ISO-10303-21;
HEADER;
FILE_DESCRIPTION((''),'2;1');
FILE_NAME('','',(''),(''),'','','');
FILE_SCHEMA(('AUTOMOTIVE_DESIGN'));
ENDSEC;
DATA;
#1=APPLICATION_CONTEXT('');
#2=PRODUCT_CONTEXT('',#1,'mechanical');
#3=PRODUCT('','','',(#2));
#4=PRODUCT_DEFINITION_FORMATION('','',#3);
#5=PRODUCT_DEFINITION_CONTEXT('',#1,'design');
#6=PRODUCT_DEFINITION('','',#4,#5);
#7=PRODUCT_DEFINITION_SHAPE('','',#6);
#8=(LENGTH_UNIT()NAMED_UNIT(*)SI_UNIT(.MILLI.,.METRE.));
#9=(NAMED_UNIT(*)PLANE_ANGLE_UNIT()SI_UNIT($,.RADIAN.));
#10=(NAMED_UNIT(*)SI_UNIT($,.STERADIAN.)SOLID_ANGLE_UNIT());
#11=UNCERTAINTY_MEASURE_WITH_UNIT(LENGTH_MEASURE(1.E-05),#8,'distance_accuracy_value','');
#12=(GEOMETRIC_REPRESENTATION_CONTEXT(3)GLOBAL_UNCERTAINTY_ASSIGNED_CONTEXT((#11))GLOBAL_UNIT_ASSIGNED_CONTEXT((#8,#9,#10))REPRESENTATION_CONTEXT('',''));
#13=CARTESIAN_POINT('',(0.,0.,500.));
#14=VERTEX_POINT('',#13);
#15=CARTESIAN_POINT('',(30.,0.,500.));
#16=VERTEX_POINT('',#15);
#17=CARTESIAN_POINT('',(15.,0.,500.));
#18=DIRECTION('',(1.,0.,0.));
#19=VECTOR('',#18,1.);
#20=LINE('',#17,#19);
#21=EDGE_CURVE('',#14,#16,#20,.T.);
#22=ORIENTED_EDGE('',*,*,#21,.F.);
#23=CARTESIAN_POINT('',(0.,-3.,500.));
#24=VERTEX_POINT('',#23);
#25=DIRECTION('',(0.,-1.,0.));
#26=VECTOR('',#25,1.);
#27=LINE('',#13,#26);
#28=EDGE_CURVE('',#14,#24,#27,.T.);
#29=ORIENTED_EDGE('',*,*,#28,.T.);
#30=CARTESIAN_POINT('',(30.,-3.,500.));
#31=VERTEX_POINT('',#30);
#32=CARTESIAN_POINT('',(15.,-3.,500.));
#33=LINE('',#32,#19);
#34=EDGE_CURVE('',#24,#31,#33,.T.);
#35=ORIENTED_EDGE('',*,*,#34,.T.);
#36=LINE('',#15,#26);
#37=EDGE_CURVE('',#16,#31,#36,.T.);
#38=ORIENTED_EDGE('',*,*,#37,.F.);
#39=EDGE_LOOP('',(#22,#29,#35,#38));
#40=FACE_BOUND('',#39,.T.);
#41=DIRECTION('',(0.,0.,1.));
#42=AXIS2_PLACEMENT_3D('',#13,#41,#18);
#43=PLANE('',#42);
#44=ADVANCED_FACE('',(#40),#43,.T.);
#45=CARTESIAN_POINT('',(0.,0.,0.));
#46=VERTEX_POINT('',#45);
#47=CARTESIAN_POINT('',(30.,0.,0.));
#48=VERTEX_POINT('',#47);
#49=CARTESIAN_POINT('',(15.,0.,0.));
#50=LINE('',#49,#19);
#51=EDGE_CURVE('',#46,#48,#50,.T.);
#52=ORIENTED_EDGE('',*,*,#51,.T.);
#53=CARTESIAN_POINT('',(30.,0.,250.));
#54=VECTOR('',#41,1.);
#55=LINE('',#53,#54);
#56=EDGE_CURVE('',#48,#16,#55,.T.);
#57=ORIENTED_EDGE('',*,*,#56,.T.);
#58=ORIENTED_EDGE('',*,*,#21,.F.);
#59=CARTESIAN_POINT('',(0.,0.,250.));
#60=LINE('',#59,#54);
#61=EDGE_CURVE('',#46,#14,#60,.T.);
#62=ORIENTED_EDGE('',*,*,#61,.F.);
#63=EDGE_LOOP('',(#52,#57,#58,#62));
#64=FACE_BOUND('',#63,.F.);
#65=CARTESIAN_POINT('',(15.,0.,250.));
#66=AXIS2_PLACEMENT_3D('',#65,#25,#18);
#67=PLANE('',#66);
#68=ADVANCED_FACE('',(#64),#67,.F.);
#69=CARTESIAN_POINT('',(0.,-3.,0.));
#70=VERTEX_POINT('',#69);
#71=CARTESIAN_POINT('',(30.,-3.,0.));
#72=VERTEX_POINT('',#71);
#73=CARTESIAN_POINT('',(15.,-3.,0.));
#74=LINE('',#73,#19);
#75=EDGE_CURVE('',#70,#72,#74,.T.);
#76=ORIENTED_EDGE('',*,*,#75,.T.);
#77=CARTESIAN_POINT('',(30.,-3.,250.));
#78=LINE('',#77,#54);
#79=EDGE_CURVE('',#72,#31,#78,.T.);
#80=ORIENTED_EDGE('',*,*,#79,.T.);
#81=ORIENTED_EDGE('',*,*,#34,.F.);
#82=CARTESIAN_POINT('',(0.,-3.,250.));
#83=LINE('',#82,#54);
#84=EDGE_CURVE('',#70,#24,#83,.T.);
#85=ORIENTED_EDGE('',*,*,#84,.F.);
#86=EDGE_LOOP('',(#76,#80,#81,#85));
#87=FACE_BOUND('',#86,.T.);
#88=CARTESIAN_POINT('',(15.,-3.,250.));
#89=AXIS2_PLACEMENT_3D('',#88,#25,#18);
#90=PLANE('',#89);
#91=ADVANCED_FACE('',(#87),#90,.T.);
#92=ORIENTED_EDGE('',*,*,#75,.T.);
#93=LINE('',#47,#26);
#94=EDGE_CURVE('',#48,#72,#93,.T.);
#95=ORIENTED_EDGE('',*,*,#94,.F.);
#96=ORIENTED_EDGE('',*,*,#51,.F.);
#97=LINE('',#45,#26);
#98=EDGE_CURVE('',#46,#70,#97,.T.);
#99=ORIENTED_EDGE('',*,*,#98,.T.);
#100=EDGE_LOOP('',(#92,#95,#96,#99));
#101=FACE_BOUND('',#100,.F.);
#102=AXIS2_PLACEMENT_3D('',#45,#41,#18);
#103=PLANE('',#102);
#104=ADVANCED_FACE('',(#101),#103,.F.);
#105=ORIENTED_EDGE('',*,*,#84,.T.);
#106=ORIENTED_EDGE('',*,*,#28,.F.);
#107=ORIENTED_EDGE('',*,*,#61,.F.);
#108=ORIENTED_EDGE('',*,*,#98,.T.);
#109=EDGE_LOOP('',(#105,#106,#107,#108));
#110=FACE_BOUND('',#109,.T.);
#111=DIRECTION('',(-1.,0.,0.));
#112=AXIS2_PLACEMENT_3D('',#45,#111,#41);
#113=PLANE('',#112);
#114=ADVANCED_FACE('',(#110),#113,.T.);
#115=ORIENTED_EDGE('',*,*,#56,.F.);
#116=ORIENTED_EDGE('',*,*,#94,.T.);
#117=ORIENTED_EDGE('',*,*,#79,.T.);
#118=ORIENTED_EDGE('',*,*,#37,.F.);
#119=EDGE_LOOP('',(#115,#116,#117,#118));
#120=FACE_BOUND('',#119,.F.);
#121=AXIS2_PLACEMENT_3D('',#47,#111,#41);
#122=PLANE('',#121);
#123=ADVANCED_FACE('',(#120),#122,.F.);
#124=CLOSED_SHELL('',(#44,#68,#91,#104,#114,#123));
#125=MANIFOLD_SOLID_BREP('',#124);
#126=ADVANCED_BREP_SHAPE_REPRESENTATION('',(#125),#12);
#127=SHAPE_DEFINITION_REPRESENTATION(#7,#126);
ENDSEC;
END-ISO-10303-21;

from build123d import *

# Parameters (mm, degrees)
F0_W     = 30
F0_H     = 500
F1_DEPTH = 3
F2_R     = 4.5
F3_DEPTH = 752


# Not quite as in the source:
# - an extrude ends at something that could not be found from the text; its depth is read off the source's solid


with BuildPart() as f1:
    # F0 (on Front) → F1 (new body)
    with BuildSketch(Plane.XZ):
        with Locations((15, 250)):
            Rectangle(F0_W, F0_H)
    extrude(amount=F1_DEPTH)

    # F2 (on face) → F3 (cut, through all)
    with BuildSketch(Plane.XZ):
        with Locations((15, 470)):
            Circle(F2_R)
    extrude(amount=-F3_DEPTH, mode=Mode.SUBTRACT)


solid = f1.part
